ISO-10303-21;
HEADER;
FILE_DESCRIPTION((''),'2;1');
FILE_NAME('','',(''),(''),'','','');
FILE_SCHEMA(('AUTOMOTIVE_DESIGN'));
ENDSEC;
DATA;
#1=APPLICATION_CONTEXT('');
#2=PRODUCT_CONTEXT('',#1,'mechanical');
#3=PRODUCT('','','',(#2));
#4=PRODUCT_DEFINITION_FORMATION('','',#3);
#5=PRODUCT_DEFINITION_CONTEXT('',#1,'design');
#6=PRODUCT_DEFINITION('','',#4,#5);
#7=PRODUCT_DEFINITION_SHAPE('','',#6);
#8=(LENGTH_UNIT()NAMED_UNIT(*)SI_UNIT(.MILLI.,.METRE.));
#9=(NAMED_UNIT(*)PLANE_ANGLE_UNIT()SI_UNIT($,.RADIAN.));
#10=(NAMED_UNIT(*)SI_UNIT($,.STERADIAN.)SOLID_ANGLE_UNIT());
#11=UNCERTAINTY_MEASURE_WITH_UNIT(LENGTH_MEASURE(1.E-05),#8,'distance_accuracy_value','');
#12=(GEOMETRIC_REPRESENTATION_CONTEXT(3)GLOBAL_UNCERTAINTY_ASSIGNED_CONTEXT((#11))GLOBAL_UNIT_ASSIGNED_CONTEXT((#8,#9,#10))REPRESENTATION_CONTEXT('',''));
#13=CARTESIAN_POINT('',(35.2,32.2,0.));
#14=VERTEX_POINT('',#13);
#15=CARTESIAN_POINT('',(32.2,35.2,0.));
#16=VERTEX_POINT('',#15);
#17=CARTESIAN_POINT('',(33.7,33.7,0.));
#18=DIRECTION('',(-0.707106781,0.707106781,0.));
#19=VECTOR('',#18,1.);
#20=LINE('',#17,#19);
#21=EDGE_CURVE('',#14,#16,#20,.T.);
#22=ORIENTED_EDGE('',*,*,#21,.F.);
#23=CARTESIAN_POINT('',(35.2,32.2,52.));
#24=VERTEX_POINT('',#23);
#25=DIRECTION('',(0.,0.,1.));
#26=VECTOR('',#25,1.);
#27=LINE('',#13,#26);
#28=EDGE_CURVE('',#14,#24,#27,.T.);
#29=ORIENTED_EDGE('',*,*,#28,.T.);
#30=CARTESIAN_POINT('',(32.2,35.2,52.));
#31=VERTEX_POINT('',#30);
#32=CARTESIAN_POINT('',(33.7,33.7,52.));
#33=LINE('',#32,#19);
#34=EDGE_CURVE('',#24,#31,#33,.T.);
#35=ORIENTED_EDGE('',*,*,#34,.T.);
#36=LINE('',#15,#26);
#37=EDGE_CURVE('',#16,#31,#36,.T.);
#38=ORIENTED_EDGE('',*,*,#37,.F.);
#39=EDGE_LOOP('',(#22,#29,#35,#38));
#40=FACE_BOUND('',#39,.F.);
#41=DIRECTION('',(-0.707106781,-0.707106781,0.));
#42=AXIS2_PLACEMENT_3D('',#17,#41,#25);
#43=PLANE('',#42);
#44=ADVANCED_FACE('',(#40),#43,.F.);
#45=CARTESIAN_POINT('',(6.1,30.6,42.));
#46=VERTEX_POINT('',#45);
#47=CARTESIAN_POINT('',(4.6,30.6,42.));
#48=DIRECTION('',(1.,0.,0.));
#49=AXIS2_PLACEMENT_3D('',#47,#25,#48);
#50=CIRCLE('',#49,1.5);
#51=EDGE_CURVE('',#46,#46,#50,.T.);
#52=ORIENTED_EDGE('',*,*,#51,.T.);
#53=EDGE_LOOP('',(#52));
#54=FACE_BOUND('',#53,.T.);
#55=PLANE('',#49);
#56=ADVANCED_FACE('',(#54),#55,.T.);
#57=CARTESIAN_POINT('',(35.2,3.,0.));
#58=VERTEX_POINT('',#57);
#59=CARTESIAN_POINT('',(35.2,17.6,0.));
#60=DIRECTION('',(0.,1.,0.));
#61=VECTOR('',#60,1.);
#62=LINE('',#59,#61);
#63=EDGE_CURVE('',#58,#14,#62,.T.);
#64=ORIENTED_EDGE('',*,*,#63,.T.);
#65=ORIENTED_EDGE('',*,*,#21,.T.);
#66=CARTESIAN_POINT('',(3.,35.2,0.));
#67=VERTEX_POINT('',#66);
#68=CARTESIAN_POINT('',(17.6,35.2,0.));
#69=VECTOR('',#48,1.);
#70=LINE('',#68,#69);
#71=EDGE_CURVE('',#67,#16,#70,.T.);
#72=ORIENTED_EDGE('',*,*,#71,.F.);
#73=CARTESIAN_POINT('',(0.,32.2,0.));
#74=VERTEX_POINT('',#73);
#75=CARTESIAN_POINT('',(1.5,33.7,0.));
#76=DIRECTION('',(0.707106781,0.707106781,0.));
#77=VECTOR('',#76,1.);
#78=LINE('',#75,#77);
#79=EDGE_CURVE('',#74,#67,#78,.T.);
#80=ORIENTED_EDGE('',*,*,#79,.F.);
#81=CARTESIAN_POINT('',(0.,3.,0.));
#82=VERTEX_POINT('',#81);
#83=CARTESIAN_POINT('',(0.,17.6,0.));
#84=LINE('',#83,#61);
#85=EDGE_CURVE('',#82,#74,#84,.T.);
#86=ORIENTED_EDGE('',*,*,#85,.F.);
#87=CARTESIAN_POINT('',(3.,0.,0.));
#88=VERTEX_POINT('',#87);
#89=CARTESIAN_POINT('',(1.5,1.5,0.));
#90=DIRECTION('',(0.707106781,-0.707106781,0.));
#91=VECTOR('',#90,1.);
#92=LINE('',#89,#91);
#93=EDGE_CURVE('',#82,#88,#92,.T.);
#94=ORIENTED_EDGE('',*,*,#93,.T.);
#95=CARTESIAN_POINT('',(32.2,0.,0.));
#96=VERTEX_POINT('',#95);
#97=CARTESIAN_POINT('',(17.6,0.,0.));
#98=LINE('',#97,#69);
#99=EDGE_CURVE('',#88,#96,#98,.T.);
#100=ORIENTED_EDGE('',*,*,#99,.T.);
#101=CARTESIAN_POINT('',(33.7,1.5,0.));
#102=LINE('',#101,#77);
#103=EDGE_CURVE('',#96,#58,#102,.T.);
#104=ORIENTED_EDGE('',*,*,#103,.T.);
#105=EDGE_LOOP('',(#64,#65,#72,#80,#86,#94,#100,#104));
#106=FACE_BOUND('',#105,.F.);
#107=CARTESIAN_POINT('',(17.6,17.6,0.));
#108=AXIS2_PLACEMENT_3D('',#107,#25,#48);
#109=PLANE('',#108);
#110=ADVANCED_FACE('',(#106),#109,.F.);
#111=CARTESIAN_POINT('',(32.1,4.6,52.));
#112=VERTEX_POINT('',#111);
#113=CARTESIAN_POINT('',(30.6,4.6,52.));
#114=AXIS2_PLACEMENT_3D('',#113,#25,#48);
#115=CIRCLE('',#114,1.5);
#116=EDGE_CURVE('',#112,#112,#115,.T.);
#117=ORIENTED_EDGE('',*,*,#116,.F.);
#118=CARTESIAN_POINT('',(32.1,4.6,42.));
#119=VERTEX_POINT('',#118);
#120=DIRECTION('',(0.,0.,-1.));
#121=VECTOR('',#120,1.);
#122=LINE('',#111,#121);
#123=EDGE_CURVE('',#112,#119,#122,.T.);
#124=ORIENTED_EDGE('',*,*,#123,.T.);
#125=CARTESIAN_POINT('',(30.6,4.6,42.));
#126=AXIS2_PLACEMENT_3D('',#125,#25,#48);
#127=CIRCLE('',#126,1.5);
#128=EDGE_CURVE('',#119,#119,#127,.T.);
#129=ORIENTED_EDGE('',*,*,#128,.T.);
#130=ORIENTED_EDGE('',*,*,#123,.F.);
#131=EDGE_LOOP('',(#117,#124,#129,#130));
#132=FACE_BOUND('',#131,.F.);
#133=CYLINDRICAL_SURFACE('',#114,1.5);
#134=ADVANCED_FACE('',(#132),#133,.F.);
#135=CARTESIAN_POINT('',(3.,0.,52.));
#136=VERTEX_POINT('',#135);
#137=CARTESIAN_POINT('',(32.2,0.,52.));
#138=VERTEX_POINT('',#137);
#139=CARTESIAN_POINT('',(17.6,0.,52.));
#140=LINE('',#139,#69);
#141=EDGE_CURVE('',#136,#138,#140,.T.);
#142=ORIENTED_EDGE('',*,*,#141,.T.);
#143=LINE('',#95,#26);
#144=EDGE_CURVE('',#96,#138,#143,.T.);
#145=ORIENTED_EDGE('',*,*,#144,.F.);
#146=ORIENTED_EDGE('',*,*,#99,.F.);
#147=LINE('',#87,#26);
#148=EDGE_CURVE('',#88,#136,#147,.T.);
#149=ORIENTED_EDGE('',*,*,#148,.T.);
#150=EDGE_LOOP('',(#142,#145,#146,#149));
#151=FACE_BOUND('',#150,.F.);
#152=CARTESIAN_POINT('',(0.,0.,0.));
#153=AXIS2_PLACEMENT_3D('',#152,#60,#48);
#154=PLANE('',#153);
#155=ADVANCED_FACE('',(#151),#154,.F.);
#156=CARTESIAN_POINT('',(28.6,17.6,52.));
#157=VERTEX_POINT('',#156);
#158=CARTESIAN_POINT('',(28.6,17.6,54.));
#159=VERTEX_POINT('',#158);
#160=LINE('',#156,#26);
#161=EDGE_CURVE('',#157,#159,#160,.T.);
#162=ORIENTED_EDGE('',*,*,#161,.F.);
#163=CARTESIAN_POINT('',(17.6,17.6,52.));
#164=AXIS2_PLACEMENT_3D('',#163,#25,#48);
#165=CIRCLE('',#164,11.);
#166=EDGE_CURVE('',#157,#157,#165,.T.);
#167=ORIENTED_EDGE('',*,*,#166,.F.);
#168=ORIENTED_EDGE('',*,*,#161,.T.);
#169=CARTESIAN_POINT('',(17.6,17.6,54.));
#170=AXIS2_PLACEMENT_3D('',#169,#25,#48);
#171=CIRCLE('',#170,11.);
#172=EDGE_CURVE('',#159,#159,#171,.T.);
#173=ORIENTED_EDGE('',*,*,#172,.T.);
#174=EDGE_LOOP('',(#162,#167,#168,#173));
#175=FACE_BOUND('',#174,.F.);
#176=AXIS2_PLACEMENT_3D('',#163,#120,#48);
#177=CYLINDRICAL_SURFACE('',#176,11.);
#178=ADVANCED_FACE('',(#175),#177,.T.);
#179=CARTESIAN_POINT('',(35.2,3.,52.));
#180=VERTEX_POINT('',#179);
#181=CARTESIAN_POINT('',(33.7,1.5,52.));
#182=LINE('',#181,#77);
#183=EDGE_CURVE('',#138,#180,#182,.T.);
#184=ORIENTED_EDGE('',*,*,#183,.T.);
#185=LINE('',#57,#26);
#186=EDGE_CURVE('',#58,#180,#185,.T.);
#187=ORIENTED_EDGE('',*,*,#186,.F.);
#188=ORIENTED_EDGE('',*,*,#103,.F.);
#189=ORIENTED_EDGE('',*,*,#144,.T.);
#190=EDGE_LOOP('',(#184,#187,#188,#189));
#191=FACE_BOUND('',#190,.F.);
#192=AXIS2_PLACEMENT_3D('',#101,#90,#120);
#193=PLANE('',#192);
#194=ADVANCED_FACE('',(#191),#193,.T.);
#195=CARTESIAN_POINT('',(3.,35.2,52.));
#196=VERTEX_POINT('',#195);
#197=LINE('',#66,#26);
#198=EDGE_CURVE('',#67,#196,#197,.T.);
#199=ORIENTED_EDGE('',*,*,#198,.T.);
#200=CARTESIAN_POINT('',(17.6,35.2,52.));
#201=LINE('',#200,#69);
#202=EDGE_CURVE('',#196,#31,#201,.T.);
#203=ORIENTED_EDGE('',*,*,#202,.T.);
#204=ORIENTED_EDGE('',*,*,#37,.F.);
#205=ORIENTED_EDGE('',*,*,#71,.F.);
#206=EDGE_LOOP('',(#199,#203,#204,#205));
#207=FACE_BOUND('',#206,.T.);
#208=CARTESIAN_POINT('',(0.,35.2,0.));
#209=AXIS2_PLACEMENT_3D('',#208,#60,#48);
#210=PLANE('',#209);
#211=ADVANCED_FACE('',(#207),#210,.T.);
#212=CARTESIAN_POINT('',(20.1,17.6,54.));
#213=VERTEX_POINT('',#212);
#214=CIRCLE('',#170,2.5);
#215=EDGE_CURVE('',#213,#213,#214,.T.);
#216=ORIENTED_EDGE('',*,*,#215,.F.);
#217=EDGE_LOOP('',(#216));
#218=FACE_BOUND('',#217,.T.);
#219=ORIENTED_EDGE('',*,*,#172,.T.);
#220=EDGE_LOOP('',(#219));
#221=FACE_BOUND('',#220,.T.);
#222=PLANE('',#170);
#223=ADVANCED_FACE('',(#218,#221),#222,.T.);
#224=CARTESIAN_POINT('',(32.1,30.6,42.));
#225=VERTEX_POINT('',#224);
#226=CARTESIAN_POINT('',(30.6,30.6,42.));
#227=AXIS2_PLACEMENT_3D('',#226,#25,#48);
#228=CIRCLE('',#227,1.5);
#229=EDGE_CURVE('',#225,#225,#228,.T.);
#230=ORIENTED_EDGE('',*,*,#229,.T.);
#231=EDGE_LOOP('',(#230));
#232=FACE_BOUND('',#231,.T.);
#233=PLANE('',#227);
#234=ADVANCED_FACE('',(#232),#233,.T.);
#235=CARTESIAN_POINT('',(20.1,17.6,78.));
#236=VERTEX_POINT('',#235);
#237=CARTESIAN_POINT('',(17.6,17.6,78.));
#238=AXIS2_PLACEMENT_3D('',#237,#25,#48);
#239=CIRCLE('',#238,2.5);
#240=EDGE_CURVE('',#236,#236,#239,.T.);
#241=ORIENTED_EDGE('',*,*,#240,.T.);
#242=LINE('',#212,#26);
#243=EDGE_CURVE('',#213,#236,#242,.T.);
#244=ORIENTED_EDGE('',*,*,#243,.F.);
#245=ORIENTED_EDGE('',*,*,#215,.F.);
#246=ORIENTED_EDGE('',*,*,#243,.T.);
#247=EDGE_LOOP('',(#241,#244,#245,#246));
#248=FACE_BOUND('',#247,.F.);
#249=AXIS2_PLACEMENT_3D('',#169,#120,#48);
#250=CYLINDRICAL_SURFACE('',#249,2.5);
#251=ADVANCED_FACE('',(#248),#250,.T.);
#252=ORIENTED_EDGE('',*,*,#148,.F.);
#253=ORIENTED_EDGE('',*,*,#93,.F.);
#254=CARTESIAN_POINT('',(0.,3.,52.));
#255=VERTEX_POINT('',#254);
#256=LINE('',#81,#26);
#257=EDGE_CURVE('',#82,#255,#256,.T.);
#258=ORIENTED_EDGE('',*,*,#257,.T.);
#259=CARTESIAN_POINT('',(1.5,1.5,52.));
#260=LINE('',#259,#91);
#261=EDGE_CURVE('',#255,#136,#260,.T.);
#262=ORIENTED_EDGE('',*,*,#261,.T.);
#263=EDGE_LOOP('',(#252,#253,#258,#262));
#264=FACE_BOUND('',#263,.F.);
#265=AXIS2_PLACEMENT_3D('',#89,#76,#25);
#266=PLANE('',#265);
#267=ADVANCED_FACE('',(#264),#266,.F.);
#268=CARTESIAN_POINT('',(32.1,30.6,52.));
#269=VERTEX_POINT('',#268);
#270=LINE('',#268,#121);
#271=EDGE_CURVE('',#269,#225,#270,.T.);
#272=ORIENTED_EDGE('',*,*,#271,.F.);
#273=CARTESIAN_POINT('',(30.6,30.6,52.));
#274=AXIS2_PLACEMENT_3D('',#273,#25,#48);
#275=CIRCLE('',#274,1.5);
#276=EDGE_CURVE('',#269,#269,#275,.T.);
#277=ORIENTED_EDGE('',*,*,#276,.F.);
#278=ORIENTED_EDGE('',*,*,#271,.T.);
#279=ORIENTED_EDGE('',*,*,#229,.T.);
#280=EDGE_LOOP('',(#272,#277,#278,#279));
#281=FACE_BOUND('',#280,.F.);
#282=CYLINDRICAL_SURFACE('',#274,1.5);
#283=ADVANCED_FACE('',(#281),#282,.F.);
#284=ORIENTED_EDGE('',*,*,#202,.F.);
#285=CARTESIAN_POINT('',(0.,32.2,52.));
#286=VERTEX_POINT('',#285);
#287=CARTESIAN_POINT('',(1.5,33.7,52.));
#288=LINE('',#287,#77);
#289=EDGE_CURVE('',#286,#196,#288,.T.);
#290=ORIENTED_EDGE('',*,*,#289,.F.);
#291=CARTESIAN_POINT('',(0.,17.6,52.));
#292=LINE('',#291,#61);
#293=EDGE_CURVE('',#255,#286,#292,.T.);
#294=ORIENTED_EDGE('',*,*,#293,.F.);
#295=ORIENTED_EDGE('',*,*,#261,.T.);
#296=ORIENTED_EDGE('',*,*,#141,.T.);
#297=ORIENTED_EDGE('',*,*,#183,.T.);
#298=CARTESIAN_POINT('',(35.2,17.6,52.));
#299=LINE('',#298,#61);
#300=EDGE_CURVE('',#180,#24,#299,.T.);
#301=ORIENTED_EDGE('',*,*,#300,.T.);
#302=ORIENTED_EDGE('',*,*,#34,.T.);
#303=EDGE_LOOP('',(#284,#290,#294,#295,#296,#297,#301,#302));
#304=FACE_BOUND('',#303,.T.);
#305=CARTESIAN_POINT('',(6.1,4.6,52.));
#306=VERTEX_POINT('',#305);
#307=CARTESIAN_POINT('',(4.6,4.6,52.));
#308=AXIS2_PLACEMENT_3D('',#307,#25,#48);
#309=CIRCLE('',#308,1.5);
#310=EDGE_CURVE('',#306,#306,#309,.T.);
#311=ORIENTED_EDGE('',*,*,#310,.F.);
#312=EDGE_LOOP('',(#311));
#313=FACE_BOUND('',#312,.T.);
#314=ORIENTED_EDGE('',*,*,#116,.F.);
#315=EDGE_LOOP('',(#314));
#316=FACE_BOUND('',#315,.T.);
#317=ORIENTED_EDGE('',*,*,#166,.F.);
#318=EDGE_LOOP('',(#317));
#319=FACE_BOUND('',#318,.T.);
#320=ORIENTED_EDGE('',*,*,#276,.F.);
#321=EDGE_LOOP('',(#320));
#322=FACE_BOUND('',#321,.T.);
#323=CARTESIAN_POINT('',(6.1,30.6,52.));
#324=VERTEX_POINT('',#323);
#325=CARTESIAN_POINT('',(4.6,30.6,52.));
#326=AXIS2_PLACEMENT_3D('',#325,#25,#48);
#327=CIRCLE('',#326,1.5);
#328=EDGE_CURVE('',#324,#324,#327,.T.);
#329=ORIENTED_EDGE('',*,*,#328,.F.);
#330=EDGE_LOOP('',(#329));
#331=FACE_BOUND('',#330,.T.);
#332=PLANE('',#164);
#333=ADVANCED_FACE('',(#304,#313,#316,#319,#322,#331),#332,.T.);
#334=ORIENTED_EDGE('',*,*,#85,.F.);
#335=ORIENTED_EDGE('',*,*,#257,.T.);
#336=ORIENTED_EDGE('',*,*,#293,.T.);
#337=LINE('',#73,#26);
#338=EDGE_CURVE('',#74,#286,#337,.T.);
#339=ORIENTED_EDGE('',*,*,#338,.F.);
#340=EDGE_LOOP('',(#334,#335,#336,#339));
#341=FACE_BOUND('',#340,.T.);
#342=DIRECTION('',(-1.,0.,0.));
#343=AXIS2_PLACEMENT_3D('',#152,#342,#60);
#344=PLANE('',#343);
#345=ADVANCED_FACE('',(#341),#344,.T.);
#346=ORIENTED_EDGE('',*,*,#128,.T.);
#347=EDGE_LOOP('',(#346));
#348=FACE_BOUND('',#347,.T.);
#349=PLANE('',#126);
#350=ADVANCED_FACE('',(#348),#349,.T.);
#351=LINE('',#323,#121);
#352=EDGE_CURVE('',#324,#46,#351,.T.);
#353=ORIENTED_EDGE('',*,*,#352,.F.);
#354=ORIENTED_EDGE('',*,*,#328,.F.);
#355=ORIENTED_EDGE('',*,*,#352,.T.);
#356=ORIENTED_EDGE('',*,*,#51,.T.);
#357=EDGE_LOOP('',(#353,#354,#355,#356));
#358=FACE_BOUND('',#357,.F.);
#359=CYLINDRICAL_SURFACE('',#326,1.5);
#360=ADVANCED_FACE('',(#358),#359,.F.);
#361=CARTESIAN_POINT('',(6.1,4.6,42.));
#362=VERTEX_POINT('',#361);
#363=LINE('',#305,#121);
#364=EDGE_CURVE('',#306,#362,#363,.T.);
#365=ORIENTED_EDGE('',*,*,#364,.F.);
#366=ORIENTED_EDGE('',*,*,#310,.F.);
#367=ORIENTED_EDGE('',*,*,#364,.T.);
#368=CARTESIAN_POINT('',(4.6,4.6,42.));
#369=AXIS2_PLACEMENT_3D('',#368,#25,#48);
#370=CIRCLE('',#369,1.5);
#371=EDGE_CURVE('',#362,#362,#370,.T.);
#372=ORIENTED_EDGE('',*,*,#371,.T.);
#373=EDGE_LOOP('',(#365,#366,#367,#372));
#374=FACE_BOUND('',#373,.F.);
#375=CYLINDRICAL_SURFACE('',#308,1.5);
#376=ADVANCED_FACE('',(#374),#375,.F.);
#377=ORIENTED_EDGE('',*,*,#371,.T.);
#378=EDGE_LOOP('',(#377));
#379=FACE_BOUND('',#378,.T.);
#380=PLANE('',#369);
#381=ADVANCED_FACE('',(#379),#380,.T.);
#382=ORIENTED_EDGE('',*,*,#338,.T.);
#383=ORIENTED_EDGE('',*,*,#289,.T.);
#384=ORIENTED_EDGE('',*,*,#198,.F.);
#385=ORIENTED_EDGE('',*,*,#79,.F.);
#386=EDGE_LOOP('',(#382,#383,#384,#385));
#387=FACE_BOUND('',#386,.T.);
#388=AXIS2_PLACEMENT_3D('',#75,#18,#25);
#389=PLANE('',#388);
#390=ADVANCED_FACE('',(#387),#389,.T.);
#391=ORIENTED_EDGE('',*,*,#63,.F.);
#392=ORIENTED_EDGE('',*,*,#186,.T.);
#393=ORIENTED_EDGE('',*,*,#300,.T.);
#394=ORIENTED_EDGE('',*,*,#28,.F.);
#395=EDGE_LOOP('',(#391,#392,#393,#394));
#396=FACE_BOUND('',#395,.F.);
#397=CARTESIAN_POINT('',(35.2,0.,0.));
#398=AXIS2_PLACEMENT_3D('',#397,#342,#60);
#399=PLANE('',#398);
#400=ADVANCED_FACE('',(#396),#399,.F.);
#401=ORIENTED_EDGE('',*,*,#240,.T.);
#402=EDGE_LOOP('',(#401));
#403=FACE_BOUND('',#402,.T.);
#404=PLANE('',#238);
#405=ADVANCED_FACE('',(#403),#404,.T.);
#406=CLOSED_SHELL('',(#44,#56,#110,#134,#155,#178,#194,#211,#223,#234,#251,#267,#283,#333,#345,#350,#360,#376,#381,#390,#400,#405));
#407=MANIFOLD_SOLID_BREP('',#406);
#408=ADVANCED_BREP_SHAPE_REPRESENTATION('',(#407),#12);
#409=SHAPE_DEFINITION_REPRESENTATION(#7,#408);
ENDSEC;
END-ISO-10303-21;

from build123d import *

# Parameters (mm, degrees)
F0_W     = 35.2
F0_H     = 35.2
F1_DEPTH = 52
F2_SIZE  = 3
F3_R     = 11
F4_DEPTH = 2
F5_R     = 2.5
F6_DEPTH = 24
F7_R     = 1.5
F8_DEPTH = 10


# Not quite as in the source:
# - a feature names something its author has since deleted; it is built from what else it names


with BuildPart() as f1:
    # F0 (on Top) → F1 (new body)
    with BuildSketch(Plane.XY):
        with Locations((17.6, 17.6)):
            Rectangle(F0_W, F0_H)
    extrude(amount=F1_DEPTH)

    # F2
    f2_edges = [f1.edges().sort_by_distance(p)[0] for p in [
        (0, 0, 26),
        (0, 35.2, 26),
        (35.2, 0, 26),
        (35.2, 35.2, 26),
    ]]
    chamfer(f2_edges, length=F2_SIZE)

    # F3 (on face) → F4 (join)
    with BuildSketch(Plane.XY.offset(52)):
        with Locations((17.6, 17.6)):
            Circle(F3_R)
    extrude(amount=F4_DEPTH)

    # F5 (on face) → F6 (join)
    with BuildSketch(Plane.XY.offset(54)):
        with Locations((17.6, 17.6)):
            Circle(F5_R)
    extrude(amount=F6_DEPTH)

    # F7 (on face) → F8 (cut)
    with BuildSketch(Plane.XY.offset(52)):
        with Locations((4.6, 30.6)):
            Circle(F7_R)
        with Locations((4.6, 4.6)):
            Circle(F7_R)
        with Locations((30.6, 30.6)):
            Circle(F7_R)
        with Locations((30.6, 4.6)):
            Circle(F7_R)
    extrude(amount=-F8_DEPTH, mode=Mode.SUBTRACT)


solid = f1.part
